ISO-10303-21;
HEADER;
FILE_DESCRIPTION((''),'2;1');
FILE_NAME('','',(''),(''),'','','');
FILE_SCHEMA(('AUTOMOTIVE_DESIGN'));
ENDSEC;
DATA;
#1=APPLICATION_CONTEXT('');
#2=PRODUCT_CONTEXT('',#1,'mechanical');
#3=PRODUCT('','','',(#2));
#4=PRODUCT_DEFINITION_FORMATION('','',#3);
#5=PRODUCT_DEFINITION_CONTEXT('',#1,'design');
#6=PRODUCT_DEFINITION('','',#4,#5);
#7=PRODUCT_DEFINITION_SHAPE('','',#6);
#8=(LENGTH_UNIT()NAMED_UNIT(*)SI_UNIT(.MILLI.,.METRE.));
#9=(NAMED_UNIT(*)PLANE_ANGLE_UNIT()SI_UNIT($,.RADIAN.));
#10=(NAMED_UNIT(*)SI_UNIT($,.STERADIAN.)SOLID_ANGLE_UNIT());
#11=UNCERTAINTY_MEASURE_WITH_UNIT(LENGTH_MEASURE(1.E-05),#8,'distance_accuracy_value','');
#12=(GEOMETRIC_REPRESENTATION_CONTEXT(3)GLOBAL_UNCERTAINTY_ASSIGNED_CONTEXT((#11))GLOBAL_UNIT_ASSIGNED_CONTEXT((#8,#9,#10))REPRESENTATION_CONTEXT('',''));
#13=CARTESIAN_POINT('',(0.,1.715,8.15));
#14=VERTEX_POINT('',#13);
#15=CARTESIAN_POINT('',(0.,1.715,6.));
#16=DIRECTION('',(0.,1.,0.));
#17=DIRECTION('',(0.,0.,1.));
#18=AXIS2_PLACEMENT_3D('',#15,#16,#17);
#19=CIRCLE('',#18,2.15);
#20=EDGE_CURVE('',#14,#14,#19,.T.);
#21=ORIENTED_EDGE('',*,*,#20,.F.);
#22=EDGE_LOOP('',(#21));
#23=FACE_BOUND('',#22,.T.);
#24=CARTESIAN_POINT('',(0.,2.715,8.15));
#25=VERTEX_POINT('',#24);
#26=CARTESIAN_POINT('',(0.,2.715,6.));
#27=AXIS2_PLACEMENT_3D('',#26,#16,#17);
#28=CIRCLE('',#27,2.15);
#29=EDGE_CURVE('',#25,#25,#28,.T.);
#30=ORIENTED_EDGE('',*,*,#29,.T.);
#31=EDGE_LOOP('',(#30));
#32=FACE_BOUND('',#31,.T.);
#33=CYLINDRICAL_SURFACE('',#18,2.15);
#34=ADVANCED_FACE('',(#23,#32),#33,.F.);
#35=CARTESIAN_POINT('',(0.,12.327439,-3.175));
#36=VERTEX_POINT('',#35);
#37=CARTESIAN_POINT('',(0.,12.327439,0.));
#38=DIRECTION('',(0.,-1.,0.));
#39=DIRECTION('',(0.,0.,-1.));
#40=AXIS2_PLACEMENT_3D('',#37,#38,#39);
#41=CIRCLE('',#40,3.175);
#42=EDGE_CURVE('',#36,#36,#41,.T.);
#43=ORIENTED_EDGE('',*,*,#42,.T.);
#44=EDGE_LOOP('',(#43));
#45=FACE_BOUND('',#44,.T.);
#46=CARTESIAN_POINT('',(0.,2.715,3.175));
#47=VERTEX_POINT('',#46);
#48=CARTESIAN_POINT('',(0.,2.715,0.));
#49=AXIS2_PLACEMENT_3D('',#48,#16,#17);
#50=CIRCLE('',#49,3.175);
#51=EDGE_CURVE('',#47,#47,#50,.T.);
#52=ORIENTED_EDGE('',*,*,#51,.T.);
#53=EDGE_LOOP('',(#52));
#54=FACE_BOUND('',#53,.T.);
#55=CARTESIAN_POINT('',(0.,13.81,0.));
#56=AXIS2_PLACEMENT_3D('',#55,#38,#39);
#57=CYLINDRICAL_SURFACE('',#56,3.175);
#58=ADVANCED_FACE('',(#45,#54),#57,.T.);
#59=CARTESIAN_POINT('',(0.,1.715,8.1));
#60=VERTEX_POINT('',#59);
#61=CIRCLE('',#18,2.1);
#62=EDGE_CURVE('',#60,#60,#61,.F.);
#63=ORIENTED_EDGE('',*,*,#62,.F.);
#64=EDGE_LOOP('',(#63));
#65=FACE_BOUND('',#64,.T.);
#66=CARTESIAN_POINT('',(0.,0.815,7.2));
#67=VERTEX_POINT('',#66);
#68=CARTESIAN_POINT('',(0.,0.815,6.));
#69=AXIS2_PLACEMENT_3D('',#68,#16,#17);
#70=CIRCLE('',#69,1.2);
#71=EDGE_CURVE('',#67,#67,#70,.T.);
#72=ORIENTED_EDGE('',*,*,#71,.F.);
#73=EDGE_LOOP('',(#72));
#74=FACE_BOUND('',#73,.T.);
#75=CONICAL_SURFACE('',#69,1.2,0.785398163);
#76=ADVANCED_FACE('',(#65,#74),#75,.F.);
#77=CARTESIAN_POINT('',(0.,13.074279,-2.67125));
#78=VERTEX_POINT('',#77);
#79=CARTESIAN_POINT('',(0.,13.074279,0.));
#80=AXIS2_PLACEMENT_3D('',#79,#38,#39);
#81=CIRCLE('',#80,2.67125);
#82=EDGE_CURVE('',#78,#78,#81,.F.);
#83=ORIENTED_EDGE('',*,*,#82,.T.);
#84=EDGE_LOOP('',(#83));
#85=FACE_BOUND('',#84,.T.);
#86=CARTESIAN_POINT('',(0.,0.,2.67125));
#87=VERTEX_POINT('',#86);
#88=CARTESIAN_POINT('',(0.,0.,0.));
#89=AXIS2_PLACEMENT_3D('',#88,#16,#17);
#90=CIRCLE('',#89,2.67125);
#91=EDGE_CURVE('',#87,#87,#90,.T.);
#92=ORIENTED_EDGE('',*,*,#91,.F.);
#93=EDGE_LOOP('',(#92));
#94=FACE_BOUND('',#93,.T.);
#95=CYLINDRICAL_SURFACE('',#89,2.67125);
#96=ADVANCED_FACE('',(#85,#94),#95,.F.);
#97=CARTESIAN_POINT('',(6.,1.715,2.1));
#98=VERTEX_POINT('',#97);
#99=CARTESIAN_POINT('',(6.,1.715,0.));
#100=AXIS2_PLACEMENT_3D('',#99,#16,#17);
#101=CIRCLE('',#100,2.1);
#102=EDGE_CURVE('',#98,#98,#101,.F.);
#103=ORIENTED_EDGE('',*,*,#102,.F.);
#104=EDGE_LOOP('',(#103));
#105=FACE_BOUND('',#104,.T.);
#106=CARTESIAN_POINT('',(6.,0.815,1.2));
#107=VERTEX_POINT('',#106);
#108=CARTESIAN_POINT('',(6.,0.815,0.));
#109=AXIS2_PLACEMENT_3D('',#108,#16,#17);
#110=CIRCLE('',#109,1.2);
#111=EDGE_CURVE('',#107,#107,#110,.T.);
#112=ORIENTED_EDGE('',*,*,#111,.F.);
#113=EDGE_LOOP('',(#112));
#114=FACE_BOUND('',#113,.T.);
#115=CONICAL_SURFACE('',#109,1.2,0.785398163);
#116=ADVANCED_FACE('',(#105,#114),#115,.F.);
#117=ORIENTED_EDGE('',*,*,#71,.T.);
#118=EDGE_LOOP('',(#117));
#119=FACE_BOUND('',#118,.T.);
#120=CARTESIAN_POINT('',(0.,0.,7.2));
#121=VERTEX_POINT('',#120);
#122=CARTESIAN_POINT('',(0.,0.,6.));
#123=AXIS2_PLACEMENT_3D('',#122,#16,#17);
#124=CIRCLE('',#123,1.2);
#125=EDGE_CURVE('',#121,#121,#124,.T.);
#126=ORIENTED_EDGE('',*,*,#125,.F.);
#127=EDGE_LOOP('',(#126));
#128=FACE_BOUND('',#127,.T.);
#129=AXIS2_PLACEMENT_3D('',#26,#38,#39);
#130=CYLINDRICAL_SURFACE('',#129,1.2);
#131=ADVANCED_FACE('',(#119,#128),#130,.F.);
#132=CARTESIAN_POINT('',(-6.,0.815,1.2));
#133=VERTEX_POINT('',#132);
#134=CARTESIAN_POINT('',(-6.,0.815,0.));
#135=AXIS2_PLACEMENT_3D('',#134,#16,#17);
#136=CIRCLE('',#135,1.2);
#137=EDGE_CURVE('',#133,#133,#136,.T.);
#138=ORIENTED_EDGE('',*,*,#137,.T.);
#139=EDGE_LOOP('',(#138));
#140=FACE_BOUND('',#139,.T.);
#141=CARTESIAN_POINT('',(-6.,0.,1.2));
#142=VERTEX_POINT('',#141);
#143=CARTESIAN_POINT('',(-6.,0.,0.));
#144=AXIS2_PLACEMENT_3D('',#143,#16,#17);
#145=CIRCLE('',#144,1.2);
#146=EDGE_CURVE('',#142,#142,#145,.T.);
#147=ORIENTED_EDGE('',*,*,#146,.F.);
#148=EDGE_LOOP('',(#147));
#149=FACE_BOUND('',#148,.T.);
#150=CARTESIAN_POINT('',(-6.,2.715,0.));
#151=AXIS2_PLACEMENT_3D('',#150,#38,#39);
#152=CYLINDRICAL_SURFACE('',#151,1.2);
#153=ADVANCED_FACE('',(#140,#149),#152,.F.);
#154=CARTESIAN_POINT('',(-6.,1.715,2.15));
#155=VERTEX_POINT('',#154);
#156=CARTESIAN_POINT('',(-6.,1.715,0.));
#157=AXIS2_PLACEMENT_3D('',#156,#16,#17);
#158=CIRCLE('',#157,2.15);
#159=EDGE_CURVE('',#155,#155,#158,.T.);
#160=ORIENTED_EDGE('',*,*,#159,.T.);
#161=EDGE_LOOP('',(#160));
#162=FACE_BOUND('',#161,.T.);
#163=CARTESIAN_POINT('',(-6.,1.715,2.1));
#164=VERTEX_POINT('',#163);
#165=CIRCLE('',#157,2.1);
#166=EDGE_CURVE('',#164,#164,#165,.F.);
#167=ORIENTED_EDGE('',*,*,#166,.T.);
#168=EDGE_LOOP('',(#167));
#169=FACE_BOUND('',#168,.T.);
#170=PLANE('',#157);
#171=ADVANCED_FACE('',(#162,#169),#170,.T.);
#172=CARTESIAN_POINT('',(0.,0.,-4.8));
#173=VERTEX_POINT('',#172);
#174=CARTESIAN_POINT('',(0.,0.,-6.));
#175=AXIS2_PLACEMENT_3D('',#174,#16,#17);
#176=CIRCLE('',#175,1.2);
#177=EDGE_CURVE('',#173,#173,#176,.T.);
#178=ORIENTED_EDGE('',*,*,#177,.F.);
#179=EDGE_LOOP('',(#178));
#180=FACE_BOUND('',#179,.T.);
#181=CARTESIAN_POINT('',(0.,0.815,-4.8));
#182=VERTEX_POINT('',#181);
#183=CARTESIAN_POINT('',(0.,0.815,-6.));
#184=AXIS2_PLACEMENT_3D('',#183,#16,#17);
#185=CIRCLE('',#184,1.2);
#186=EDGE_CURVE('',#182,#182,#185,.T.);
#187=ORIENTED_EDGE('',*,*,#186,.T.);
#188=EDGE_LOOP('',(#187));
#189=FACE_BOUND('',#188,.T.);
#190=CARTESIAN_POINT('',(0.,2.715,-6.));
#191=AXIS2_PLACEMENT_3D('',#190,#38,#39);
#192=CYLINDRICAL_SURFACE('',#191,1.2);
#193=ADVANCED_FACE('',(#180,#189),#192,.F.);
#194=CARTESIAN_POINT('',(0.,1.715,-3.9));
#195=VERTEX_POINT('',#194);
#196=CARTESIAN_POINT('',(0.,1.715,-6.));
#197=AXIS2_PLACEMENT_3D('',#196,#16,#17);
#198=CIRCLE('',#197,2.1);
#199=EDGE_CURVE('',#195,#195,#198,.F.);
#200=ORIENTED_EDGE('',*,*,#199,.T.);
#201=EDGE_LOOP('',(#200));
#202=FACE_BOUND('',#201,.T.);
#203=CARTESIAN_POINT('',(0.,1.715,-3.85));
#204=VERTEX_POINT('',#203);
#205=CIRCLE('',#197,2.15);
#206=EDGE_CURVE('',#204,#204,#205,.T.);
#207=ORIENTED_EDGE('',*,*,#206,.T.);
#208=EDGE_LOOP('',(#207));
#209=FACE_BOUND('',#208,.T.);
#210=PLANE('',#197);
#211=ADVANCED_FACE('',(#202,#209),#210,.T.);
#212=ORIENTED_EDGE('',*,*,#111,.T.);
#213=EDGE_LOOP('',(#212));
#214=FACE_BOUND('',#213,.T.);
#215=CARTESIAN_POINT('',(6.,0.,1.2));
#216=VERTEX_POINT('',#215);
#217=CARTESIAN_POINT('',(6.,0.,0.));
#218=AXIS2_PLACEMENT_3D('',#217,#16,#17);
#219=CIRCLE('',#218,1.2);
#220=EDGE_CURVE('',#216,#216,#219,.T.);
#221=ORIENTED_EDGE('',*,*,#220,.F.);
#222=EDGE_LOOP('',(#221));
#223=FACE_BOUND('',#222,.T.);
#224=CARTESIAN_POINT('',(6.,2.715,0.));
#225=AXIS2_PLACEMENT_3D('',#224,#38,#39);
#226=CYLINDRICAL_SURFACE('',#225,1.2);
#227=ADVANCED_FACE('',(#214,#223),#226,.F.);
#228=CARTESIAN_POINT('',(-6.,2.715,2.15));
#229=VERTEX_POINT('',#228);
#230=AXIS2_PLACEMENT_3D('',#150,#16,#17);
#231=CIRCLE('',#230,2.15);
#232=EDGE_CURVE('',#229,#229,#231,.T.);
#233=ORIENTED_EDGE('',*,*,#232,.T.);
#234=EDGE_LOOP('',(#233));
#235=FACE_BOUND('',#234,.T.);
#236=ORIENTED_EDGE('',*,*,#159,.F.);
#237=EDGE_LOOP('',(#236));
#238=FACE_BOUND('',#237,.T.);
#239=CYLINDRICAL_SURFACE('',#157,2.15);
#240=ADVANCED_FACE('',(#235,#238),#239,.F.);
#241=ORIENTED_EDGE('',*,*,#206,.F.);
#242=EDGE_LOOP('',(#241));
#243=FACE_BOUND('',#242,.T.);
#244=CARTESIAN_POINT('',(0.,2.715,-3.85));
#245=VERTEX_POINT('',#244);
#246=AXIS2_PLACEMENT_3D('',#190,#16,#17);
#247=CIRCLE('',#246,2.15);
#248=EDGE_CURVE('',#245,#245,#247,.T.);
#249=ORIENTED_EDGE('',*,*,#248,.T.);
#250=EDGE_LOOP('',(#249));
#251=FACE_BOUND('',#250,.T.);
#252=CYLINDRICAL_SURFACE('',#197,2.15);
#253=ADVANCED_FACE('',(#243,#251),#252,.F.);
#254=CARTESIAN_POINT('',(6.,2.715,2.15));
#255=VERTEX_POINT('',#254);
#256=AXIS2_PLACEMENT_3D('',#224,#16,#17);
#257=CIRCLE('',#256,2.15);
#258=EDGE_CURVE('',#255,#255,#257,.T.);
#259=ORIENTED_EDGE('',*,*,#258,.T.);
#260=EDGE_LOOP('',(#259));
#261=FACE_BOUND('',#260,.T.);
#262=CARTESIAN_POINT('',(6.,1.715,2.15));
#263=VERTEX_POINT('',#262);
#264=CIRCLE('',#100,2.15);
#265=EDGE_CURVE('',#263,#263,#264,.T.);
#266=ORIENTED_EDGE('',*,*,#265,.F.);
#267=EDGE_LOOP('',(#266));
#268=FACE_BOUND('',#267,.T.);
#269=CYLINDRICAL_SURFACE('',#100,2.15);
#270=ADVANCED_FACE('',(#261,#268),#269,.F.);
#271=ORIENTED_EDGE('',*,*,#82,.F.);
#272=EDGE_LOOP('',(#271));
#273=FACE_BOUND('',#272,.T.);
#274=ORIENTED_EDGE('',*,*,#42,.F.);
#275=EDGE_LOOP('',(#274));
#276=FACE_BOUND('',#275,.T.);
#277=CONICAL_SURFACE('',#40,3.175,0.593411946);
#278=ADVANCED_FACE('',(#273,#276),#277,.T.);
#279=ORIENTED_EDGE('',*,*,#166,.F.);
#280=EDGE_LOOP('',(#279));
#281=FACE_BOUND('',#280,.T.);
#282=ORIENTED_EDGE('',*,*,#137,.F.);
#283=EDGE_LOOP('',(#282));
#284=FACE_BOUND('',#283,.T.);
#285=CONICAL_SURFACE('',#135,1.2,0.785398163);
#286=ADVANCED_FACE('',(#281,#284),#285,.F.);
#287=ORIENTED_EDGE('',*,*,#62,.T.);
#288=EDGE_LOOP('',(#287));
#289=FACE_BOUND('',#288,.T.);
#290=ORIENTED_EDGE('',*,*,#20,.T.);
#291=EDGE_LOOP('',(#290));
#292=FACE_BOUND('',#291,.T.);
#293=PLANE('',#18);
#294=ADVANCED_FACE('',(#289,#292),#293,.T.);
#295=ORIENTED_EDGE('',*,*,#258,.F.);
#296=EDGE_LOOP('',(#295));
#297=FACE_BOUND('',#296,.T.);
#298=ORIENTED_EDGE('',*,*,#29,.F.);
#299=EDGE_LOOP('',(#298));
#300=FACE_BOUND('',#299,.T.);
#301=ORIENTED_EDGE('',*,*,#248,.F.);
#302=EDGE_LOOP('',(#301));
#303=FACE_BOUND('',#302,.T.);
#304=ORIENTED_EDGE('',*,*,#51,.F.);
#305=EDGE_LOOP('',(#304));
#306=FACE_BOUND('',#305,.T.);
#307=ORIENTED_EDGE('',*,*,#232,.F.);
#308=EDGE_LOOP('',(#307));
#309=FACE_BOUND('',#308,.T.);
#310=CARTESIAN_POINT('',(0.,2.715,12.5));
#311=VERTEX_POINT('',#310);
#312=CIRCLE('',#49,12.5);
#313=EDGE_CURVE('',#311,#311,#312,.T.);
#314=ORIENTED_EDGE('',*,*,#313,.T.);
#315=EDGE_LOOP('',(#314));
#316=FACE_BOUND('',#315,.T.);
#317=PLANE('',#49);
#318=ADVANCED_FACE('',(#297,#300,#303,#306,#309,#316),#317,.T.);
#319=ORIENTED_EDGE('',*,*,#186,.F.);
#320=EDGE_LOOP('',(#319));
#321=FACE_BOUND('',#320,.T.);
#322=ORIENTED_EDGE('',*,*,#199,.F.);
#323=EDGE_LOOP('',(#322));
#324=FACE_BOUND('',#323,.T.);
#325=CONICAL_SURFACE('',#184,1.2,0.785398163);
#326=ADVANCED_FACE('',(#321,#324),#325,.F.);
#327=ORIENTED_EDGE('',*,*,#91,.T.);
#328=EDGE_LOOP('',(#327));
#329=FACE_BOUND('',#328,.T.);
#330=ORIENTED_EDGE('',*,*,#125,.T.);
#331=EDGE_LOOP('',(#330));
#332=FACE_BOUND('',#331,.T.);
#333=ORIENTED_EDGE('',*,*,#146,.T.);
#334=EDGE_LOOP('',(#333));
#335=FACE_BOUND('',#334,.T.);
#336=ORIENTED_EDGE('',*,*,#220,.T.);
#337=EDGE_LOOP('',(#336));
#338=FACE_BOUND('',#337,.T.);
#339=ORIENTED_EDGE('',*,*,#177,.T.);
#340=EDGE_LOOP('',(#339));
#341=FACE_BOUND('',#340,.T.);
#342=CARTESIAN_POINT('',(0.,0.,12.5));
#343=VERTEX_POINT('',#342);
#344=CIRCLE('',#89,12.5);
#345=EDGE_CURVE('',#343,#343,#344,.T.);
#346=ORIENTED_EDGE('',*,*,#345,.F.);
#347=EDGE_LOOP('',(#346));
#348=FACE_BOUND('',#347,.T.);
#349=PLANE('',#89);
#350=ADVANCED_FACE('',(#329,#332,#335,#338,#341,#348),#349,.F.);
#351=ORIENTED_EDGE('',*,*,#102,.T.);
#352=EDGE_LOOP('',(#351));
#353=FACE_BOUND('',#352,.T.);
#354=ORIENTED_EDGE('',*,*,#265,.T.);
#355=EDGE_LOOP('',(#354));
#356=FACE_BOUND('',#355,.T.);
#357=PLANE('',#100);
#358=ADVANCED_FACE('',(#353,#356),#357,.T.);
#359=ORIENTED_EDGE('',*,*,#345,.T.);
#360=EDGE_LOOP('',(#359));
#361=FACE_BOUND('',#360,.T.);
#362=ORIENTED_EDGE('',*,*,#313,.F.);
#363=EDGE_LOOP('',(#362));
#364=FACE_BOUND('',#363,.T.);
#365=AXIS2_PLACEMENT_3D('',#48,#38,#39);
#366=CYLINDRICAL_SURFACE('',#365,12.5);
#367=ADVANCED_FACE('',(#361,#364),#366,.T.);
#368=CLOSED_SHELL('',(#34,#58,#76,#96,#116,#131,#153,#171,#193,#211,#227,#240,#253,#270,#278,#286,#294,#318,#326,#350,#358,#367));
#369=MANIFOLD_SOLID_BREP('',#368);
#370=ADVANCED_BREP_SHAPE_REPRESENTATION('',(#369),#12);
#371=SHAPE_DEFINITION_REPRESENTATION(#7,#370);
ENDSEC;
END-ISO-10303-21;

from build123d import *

# Parameters (mm, degrees)
SKETCH1_R           = 12.5
SKETCH1_R_2         = 2.37125
SKETCH1_R_3         = 1.2
BOSS_EXTRUDE1_DEPTH = 2.715
SKETCH2_R           = 2.15
SKETCH2_R_2         = 3.175
CUT_EXTRUDE1_DEPTH  = 1
CHAMFER1_SIZE       = 0.9
SKETCH3_R           = 3.175
SKETCH3_R_2         = 2.37125
BOSS_EXTRUDE2_DEPTH = 13.81
CUT_EXTRUDE2_START  = -13.81
SKETCH4_R           = 2.67125
SKETCH4_R_2         = 2.37125
CUT_EXTRUDE2_DEPTH  = 13.81
CHAMFER2_SIZE       = 1.482560969
CHAMFER2_SIZE_2     = 1


with BuildPart() as part:
    # Sketch1 → Boss-Extrude1 (new body)
    with BuildSketch(Plane(origin=(0, 0, 0), x_dir=(1, 0, 0), z_dir=(0, 1, 0))):
        with Locations(Location((0, 0, 0), (0, 0, 270))):
            Circle(SKETCH1_R)
        with Locations(Location((0, 0, 0), (0, 0, 270))):
            Circle(SKETCH1_R_2, mode=Mode.SUBTRACT)
        with Locations(Location((0, -6, 0), (0, 0, 270))):
            Circle(SKETCH1_R_3, mode=Mode.SUBTRACT)
        with Locations(Location((-6, 0, 0), (0, 0, 270))):
            Circle(SKETCH1_R_3, mode=Mode.SUBTRACT)
        with Locations(Location((0, 6, 0), (0, 0, 270))):
            Circle(SKETCH1_R_3, mode=Mode.SUBTRACT)
        with Locations(Location((6, 0, 0), (0, 0, 270))):
            Circle(SKETCH1_R_3, mode=Mode.SUBTRACT)
    extrude(amount=BOSS_EXTRUDE1_DEPTH)

    # Sketch2 → Cut-Extrude1 (cut)
    with BuildSketch(Plane(origin=(0, 2.715, 0), x_dir=(1, 0, 0), z_dir=(0, 1, 0))):
        with Locations(Location((0, 6, 0), (0, 0, 270))):
            Circle(SKETCH2_R)
        with Locations(Location((-6, 0, 0), (0, 0, 270))):
            Circle(SKETCH2_R)
        with Locations(Location((6, 0, 0), (0, 0, 270))):
            Circle(SKETCH2_R)
        with Locations(Location((0, -6, 0), (0, 0, 270))):
            Circle(SKETCH2_R)
        with Locations(Location((0, 0, 0), (0, 0, 270))):
            Circle(SKETCH2_R_2)
    extrude(amount=-CUT_EXTRUDE1_DEPTH, mode=Mode.SUBTRACT)

    # Chamfer1
    # the kernel refuses this chamfer: 0.9 mm, written as the material it takes off along each edge
    with BuildSketch(Plane(origin=(0, 1.715, 6), x_dir=(0, 0, 1), z_dir=(1, 0, 0))) as chamfer1_piece_1:
        Polygon((1.2, CHAMFER1_SIZE), (1.2 + CHAMFER1_SIZE, 0), (1.2, 0), align=None)
    revolve(axis=Axis((0, 1.715, 6), (0, -1, 0)), mode=Mode.SUBTRACT)
    with BuildSketch(Plane(origin=(6, 1.715, 0), x_dir=(0, 0, 1), z_dir=(1, 0, 0))) as chamfer1_piece_2:
        Polygon((1.2, CHAMFER1_SIZE), (1.2 + CHAMFER1_SIZE, 0), (1.2, 0), align=None)
    revolve(axis=Axis((6, 1.715, 0), (0, -1, 0)), mode=Mode.SUBTRACT)
    with BuildSketch(Plane(origin=(0, 1.715, 0), x_dir=(0, 0, 1), z_dir=(1, 0, 0))) as chamfer1_piece_3_section:
        Polygon((2.37125, CHAMFER1_SIZE), (2.37125 + CHAMFER1_SIZE, 0), (2.37125, 0), align=None)
    chamfer1_piece_3 = revolve(axis=Axis((0, 1.715, 0), (0, -1, 0)), mode=Mode.PRIVATE)
    chamfer1_piece_3 = chamfer1_piece_3 & Plane(origin=(0, 1.217857085, 0), x_dir=(0, 0, 1), z_dir=(0, 1, 0)) * Cylinder(3.175, 14, mode=Mode.PRIVATE)
    add(chamfer1_piece_3, mode=Mode.SUBTRACT)
    with BuildSketch(Plane(origin=(-6, 1.715, 0), x_dir=(0, 0, 1), z_dir=(1, 0, 0))) as chamfer1_piece_4:
        Polygon((1.2, CHAMFER1_SIZE), (1.2 + CHAMFER1_SIZE, 0), (1.2, 0), align=None)
    revolve(axis=Axis((-6, 1.715, 0), (0, -1, 0)), mode=Mode.SUBTRACT)
    with BuildSketch(Plane(origin=(0, 1.715, -6), x_dir=(0, 0, 1), z_dir=(1, 0, 0))) as chamfer1_piece_5:
        Polygon((1.2, CHAMFER1_SIZE), (1.2 + CHAMFER1_SIZE, 0), (1.2, 0), align=None)
    revolve(axis=Axis((0, 1.715, -6), (0, -1, 0)), mode=Mode.SUBTRACT)

    # Sketch3 → Boss-Extrude2 (add)
    with BuildSketch(Plane.XZ):
        with Locations(Location((0, 0, 0), (0, 0, 270))):
            Circle(SKETCH3_R)
        with Locations(Location((0, 0, 0), (0, 0, 270))):
            Circle(SKETCH3_R_2, mode=Mode.SUBTRACT)
    extrude(amount=-BOSS_EXTRUDE2_DEPTH)

    # Sketch4 → Cut-Extrude2 (cut)
    with BuildSketch(Plane(origin=(0, 13.81, 0), x_dir=(1, 0, 0), z_dir=(0, 1, 0)).offset(CUT_EXTRUDE2_START)):
        with Locations(Location((0, 0, 0), (0, 0, 270))):
            Circle(SKETCH4_R)
        Circle(SKETCH4_R_2, mode=Mode.SUBTRACT)
    extrude(amount=CUT_EXTRUDE2_DEPTH, mode=Mode.SUBTRACT)

    # Chamfer2
    # the kernel refuses this chamfer: 1.482560969, 1 mm, written as the material it takes off along each edge
    with BuildSketch(Plane(origin=(0, 13.81, 0), x_dir=(0, 0, -1), z_dir=(-1, 0, 0))) as chamfer2_piece_1:
        Polygon((3.175, CHAMFER2_SIZE), (3.175 - CHAMFER2_SIZE_2, 0), (3.175, 0), align=None)
    revolve(axis=Axis((0, 13.81, 0), (0, -1, 0)), mode=Mode.SUBTRACT)


solid = part.part
